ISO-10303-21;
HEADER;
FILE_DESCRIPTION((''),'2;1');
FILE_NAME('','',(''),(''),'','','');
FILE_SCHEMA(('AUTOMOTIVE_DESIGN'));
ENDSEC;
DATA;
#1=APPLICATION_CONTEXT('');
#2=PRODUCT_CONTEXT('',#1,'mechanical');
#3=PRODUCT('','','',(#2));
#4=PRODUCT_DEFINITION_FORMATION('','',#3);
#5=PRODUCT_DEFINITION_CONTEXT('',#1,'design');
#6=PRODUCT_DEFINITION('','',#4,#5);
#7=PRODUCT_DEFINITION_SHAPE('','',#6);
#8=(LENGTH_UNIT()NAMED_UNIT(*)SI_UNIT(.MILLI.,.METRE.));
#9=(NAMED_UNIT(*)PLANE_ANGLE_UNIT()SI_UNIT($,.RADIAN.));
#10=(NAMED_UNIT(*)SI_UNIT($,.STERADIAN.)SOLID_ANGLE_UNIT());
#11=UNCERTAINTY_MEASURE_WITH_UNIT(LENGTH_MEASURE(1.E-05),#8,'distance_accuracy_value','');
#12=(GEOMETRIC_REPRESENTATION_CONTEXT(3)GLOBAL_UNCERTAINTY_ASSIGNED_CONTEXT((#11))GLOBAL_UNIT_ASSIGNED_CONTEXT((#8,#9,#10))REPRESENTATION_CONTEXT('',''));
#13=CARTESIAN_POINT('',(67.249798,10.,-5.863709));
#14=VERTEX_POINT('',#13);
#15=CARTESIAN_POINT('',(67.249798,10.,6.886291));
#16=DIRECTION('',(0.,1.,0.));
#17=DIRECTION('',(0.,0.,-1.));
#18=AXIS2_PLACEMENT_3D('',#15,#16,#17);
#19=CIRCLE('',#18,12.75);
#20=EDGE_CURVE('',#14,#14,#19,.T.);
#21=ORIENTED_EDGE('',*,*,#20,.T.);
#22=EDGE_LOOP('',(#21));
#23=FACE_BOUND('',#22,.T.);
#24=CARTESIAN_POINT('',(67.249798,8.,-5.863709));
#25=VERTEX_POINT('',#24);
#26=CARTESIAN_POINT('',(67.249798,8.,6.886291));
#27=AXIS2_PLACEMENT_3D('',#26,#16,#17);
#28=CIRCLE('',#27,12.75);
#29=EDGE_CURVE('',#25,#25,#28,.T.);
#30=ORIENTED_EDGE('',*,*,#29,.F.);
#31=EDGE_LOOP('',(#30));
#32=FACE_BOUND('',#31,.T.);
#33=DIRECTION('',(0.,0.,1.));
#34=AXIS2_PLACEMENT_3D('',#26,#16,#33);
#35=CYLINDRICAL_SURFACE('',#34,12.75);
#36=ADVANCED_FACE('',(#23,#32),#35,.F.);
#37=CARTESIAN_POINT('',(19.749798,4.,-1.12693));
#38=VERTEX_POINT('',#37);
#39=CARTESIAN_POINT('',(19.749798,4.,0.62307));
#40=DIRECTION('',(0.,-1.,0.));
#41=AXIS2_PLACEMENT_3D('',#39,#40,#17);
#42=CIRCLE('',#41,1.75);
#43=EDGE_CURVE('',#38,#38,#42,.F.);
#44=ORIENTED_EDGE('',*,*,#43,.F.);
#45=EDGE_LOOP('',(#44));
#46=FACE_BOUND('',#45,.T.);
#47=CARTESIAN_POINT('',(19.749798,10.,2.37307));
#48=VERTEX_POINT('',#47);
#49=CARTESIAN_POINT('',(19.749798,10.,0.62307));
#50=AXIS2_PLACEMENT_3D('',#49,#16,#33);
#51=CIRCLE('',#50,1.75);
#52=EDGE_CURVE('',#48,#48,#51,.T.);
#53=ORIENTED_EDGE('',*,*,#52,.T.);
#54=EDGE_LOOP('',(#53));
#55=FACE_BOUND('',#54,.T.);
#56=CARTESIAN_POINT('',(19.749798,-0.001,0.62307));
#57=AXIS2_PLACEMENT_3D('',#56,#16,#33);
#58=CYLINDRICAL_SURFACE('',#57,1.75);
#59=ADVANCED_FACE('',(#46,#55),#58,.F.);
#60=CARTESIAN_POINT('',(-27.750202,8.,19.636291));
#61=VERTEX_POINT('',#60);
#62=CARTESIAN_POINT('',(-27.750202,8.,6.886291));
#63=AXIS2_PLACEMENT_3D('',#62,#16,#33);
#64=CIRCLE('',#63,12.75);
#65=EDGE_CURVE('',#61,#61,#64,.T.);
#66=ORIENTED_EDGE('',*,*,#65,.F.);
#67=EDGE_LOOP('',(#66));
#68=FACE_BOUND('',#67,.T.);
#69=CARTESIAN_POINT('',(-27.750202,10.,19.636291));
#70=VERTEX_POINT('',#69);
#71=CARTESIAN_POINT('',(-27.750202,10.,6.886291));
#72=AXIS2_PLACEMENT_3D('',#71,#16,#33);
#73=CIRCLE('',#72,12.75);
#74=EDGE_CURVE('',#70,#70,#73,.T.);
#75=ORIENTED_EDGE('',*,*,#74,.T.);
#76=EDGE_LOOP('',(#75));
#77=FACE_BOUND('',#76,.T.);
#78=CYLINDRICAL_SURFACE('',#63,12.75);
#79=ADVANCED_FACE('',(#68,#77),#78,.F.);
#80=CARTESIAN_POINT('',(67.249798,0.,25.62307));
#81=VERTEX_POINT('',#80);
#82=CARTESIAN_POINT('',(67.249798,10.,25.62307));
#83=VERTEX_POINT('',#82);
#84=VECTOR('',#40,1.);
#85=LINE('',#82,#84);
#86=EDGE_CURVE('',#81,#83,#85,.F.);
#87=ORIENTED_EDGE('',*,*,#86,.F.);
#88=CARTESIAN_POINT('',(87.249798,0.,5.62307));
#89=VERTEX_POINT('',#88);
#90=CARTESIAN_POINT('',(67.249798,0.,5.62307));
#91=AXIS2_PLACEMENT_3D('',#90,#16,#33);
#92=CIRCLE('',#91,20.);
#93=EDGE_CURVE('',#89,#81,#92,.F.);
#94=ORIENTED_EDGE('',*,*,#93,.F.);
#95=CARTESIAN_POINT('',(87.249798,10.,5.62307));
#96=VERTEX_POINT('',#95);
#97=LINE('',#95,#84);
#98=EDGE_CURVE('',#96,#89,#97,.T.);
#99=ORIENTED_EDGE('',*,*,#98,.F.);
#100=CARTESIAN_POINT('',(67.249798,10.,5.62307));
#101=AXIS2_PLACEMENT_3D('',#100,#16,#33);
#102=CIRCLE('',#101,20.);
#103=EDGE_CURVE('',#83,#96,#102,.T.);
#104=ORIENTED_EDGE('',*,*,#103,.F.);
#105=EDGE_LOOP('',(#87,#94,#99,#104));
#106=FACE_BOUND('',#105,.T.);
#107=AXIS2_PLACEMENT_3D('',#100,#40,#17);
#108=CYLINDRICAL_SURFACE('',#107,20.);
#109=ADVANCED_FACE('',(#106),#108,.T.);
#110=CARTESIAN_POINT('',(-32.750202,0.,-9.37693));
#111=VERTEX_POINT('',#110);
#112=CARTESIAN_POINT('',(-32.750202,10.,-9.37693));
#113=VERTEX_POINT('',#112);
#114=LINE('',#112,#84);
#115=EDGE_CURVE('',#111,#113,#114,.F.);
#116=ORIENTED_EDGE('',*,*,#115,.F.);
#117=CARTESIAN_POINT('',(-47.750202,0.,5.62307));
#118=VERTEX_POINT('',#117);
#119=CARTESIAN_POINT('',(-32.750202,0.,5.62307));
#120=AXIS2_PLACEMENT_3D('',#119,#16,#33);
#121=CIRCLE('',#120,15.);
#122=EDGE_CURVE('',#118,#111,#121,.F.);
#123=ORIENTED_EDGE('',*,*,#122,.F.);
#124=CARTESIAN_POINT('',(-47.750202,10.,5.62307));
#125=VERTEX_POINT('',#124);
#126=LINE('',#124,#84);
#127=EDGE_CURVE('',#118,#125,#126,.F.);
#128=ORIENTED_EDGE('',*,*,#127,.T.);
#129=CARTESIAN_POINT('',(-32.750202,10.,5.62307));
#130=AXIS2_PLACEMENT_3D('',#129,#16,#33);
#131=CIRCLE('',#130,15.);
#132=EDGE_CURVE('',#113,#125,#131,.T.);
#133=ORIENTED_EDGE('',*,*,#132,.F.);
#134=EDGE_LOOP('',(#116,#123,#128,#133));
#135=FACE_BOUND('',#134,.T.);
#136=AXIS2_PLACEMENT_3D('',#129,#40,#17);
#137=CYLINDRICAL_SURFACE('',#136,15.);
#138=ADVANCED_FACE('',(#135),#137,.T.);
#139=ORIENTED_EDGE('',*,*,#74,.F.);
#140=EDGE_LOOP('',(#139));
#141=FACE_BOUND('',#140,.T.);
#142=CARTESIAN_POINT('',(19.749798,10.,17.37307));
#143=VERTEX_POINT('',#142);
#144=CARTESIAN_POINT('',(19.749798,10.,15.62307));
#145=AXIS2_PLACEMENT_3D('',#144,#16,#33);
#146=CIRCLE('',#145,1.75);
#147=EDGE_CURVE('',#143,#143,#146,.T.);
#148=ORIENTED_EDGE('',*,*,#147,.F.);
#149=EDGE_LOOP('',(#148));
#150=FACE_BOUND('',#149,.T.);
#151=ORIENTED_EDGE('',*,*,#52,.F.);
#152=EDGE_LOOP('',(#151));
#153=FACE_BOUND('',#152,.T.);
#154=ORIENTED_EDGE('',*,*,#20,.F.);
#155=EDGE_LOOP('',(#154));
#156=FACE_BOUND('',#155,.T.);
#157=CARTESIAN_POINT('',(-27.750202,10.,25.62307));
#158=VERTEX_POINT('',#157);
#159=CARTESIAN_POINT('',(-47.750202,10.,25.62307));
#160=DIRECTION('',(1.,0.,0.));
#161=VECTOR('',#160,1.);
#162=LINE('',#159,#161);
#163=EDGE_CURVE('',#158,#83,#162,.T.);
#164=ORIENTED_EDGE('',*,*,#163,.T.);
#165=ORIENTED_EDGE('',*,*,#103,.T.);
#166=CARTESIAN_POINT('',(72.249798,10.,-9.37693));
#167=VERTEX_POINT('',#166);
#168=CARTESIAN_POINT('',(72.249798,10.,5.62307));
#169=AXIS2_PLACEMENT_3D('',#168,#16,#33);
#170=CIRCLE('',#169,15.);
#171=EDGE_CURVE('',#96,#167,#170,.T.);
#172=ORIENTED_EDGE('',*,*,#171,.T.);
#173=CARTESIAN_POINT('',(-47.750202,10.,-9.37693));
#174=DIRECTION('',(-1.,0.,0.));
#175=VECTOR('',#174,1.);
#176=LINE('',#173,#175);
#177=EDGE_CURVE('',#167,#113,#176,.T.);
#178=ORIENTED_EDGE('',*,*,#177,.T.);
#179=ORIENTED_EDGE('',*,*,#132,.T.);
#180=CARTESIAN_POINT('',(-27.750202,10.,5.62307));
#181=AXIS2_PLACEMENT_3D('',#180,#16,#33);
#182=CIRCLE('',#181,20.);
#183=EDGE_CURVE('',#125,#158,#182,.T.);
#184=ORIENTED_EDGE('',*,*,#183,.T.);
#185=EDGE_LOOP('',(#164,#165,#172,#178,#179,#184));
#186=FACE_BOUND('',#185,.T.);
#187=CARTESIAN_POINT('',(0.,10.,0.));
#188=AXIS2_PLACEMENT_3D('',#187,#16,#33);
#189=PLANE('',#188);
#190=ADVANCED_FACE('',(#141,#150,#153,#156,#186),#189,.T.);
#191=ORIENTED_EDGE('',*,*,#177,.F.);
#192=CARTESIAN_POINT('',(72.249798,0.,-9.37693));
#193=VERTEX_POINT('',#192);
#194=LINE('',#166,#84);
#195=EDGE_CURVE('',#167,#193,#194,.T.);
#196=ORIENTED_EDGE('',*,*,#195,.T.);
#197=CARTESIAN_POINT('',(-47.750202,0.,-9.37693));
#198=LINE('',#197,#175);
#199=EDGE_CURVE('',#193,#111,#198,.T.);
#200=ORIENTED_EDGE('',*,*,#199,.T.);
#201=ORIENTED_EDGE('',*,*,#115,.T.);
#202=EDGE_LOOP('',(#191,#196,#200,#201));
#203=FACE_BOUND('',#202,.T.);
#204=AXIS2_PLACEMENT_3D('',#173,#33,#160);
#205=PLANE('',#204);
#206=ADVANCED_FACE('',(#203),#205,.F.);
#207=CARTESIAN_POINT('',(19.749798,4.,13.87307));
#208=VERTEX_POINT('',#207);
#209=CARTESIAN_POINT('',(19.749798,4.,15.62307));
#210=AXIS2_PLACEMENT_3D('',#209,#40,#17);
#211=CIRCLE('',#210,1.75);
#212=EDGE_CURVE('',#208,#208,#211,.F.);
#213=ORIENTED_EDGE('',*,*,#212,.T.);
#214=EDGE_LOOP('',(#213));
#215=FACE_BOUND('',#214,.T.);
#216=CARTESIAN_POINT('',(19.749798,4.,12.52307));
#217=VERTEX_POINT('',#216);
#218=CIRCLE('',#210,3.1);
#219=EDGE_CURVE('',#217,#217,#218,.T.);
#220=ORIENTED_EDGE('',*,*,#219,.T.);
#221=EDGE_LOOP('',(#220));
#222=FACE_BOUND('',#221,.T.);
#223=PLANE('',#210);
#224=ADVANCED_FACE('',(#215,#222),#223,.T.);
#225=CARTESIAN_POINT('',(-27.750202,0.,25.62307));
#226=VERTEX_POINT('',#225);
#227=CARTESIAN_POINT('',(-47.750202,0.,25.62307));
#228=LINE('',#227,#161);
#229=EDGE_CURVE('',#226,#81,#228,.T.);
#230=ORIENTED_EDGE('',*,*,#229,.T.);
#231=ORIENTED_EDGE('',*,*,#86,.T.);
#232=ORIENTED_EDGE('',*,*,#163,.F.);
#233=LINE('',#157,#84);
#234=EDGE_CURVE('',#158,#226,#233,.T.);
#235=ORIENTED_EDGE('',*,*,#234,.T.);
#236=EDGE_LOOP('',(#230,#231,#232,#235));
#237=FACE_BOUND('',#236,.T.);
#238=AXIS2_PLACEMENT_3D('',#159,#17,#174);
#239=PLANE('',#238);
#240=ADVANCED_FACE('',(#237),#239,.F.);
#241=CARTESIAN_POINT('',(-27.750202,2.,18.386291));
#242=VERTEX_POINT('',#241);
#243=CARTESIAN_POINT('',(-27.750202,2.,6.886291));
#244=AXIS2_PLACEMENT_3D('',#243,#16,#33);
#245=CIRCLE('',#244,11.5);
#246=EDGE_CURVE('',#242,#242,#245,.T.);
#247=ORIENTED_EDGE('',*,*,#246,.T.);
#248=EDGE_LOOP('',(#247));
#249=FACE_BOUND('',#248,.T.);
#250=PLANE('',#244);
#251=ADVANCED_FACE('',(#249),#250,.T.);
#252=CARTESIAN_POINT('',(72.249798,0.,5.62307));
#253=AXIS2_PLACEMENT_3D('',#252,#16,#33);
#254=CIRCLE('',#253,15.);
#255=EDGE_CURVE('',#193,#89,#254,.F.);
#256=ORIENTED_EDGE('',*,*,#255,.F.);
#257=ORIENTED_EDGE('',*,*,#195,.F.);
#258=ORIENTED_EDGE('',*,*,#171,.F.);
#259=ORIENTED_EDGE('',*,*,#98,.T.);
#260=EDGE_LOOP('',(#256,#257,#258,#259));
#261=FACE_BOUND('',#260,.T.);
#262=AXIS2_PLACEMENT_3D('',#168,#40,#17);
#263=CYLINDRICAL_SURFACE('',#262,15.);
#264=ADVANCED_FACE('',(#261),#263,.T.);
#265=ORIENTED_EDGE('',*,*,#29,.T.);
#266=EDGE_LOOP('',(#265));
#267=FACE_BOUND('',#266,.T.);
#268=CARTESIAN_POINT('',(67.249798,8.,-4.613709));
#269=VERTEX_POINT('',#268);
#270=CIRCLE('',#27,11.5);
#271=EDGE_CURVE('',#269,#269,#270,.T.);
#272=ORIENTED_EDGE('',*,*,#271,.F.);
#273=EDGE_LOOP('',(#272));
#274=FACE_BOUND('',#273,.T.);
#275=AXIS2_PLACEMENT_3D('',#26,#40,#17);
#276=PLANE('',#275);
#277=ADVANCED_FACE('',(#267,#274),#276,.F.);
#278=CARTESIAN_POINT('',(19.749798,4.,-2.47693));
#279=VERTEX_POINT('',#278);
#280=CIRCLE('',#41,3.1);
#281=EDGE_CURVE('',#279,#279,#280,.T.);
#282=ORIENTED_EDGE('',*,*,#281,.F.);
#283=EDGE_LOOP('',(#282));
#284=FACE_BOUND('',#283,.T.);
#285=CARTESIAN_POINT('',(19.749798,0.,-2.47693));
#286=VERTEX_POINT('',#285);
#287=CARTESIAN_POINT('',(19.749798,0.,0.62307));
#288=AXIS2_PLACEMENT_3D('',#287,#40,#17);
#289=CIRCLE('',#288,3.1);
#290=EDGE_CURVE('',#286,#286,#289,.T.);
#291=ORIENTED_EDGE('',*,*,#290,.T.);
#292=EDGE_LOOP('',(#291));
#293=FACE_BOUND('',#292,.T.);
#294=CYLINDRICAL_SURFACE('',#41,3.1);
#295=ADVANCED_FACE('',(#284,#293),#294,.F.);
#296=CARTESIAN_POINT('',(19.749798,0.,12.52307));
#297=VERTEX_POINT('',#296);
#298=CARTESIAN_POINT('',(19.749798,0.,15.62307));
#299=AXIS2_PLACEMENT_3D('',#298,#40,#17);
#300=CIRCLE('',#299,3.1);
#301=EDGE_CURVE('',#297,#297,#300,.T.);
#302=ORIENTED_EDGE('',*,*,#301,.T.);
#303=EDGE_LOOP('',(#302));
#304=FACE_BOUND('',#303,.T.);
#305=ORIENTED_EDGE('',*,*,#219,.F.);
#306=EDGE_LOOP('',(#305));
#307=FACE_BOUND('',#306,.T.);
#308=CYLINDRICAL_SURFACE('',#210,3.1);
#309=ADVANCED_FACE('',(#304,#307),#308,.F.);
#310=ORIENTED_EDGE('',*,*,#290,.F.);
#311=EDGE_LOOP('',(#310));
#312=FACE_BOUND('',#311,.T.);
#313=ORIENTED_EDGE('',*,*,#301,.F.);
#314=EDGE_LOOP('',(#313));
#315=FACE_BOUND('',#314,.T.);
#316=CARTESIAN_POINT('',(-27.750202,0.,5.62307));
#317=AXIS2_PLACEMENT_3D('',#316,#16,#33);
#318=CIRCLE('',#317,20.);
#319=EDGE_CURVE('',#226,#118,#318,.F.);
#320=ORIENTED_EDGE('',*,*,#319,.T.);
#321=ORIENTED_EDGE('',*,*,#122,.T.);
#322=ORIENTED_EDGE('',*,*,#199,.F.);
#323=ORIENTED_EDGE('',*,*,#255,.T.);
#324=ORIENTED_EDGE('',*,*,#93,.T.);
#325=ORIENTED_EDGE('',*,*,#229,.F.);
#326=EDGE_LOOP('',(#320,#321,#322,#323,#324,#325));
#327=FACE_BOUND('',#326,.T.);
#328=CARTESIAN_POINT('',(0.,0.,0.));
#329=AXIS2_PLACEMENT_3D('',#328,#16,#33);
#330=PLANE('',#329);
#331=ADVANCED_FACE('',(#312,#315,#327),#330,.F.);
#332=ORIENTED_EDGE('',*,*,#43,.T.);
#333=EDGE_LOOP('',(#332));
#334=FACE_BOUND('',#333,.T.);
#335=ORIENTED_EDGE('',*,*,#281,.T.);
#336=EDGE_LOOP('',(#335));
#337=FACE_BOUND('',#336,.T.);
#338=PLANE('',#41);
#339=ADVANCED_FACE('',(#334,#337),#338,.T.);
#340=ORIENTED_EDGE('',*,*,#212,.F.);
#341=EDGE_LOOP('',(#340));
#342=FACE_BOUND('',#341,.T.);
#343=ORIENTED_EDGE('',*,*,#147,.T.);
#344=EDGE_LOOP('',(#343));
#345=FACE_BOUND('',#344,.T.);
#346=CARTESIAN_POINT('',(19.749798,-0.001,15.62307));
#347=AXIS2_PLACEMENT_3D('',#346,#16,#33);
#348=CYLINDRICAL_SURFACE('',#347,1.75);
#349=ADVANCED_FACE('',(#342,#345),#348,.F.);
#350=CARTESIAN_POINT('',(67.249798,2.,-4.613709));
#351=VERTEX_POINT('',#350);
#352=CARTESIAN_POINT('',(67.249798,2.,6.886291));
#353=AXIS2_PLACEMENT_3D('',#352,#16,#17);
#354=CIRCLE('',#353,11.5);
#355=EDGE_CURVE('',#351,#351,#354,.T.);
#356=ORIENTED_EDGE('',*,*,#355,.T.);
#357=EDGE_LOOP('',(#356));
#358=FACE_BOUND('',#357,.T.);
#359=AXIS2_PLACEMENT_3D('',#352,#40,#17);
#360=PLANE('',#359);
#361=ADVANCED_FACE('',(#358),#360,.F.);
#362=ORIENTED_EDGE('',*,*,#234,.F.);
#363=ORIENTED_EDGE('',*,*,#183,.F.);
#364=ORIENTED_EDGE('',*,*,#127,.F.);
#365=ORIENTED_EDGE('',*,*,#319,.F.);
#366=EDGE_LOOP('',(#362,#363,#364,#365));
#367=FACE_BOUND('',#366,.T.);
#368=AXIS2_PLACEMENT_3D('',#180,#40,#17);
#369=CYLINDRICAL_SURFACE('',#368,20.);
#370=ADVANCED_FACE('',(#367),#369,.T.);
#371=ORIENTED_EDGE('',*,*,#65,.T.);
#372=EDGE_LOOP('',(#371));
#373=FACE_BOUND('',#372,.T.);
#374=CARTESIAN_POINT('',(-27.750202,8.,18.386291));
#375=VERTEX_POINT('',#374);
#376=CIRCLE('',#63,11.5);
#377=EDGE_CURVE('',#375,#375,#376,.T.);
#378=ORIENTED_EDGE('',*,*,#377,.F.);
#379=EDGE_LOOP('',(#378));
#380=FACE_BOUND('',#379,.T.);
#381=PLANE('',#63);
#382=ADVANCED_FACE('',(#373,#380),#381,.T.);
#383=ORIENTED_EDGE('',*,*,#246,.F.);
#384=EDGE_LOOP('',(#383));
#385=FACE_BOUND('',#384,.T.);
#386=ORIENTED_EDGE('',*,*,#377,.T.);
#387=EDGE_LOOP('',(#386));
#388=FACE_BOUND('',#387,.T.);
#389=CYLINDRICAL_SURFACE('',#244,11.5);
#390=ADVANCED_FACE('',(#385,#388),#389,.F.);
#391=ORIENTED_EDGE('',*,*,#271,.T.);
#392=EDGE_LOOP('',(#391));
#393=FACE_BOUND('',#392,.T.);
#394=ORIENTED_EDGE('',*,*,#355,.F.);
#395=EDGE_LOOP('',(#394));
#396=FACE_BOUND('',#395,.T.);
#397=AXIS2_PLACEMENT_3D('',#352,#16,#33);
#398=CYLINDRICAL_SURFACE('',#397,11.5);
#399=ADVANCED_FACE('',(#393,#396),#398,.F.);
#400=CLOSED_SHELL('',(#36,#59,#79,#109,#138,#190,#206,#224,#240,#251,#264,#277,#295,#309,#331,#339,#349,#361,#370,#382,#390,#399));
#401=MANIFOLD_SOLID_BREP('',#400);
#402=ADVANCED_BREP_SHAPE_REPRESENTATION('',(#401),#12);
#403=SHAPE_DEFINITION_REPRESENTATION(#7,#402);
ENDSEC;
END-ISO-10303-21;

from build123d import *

# Parameters (mm, degrees)
SKETCH1_W           = 135
SKETCH1_H           = 35
BOSS_EXTRUDE1_DEPTH = 10
FILLET1_R           = 20
SKETCH3_R           = 12.75
CUT_EXTRUDE1_DEPTH  = 2
SKETCH4_R           = 11.5
CUT_EXTRUDE2_DEPTH  = 6
CUT_EXTRUDE3_REACH  = 93.483
SKETCH5_R           = 1.75
SKETCH6_R           = 3.1
CUT_EXTRUDE4_DEPTH  = 4
FILLET2_R           = 15


with BuildPart() as part:
    # Sketch1 → Boss-Extrude1 (new body)
    with BuildSketch(Plane(origin=(0, 0, 0), x_dir=(1, 0, 0), z_dir=(0, 1, 0))):
        with Locations((19.749798241, -8.123070146)):
            Rectangle(SKETCH1_W, SKETCH1_H)
    extrude(amount=BOSS_EXTRUDE1_DEPTH)

    # Fillet1
    fillet1_edges = [part.edges().sort_by_distance(p)[0] for p in [
        (87.249798241, 5, 25.623070146),
        (-47.750201759, 5, 25.623070146),
    ]]
    fillet(fillet1_edges, radius=FILLET1_R)

    # Sketch3 → Cut-Extrude1 (cut)
    with BuildSketch(Plane(origin=(0, 10, 0), x_dir=(1, 0, 0), z_dir=(0, 1, 0))):
        with Locations(Location((-27.750201759, -6.88629089, 0), (0, 0, 270))):
            Circle(SKETCH3_R)
        with Locations(Location((67.249798241, -6.88629089, 0), (0, 0, 90))):
            Circle(SKETCH3_R)
    extrude(amount=-CUT_EXTRUDE1_DEPTH, mode=Mode.SUBTRACT)

    # Sketch4 → Cut-Extrude2 (cut)
    with BuildSketch(Plane(origin=(0, 8, 0), x_dir=(1, 0, 0), z_dir=(0, 1, 0))):
        with Locations(Location((-27.750201759, -6.88629089, 0), (0, 0, 270))):
            Circle(SKETCH4_R)
        with Locations(Location((67.249798241, -6.88629089, 0), (0, 0, 90))):
            Circle(SKETCH4_R)
    extrude(amount=-CUT_EXTRUDE2_DEPTH, mode=Mode.SUBTRACT)

    # Sketch5 → Cut-Extrude3 (cut, up to next)
    with BuildSketch(Plane(origin=(0, 10, 0), x_dir=(1, 0, 0), z_dir=(0, 1, 0)), mode=Mode.PRIVATE) as cut_extrude3_sk1:
        with Locations(Location((19.749798241, -0.623070146, 0), (0, 0, 270))):
            Circle(SKETCH5_R)
    cut_extrude3_tool1 = extrude(cut_extrude3_sk1.sketch, amount=-CUT_EXTRUDE3_REACH, mode=Mode.PRIVATE) & part.part
    # Sketch5 → Cut-Extrude3 (cut, up to next)
    with BuildSketch(Plane(origin=(0, 10, 0), x_dir=(1, 0, 0), z_dir=(0, 1, 0)), mode=Mode.PRIVATE) as cut_extrude3_sk2:
        with Locations(Location((19.749798241, -15.623070146, 0), (0, 0, 270))):
            Circle(SKETCH5_R)
    cut_extrude3_tool2 = extrude(cut_extrude3_sk2.sketch, amount=-CUT_EXTRUDE3_REACH, mode=Mode.PRIVATE) & part.part
    add(cut_extrude3_tool1.solids().sort_by_distance((19.749798, 10, 0.62307))[0], mode=Mode.SUBTRACT)
    add(cut_extrude3_tool2.solids().sort_by_distance((19.749798, 10, 15.62307))[0], mode=Mode.SUBTRACT)

    # Sketch6 → Cut-Extrude4 (cut)
    with BuildSketch(Plane.XZ):
        with Locations(Location((19.749798241, 15.623070146, 0), (0, 0, 270))):
            Circle(SKETCH6_R)
        with Locations(Location((19.749798241, 0.623070146, 0), (0, 0, 270))):
            Circle(SKETCH6_R)
    extrude(amount=-CUT_EXTRUDE4_DEPTH, mode=Mode.SUBTRACT)

    # Fillet2
    fillet2_edges = [part.edges().sort_by_distance(p)[0] for p in [
        (-47.750201759, 5, -9.376929854),
        (87.249798241, 5, -9.376929854),
    ]]
    fillet(fillet2_edges, radius=FILLET2_R - 0.0001)  # a hair under: the kernel refuses the full size


solid = part.part
